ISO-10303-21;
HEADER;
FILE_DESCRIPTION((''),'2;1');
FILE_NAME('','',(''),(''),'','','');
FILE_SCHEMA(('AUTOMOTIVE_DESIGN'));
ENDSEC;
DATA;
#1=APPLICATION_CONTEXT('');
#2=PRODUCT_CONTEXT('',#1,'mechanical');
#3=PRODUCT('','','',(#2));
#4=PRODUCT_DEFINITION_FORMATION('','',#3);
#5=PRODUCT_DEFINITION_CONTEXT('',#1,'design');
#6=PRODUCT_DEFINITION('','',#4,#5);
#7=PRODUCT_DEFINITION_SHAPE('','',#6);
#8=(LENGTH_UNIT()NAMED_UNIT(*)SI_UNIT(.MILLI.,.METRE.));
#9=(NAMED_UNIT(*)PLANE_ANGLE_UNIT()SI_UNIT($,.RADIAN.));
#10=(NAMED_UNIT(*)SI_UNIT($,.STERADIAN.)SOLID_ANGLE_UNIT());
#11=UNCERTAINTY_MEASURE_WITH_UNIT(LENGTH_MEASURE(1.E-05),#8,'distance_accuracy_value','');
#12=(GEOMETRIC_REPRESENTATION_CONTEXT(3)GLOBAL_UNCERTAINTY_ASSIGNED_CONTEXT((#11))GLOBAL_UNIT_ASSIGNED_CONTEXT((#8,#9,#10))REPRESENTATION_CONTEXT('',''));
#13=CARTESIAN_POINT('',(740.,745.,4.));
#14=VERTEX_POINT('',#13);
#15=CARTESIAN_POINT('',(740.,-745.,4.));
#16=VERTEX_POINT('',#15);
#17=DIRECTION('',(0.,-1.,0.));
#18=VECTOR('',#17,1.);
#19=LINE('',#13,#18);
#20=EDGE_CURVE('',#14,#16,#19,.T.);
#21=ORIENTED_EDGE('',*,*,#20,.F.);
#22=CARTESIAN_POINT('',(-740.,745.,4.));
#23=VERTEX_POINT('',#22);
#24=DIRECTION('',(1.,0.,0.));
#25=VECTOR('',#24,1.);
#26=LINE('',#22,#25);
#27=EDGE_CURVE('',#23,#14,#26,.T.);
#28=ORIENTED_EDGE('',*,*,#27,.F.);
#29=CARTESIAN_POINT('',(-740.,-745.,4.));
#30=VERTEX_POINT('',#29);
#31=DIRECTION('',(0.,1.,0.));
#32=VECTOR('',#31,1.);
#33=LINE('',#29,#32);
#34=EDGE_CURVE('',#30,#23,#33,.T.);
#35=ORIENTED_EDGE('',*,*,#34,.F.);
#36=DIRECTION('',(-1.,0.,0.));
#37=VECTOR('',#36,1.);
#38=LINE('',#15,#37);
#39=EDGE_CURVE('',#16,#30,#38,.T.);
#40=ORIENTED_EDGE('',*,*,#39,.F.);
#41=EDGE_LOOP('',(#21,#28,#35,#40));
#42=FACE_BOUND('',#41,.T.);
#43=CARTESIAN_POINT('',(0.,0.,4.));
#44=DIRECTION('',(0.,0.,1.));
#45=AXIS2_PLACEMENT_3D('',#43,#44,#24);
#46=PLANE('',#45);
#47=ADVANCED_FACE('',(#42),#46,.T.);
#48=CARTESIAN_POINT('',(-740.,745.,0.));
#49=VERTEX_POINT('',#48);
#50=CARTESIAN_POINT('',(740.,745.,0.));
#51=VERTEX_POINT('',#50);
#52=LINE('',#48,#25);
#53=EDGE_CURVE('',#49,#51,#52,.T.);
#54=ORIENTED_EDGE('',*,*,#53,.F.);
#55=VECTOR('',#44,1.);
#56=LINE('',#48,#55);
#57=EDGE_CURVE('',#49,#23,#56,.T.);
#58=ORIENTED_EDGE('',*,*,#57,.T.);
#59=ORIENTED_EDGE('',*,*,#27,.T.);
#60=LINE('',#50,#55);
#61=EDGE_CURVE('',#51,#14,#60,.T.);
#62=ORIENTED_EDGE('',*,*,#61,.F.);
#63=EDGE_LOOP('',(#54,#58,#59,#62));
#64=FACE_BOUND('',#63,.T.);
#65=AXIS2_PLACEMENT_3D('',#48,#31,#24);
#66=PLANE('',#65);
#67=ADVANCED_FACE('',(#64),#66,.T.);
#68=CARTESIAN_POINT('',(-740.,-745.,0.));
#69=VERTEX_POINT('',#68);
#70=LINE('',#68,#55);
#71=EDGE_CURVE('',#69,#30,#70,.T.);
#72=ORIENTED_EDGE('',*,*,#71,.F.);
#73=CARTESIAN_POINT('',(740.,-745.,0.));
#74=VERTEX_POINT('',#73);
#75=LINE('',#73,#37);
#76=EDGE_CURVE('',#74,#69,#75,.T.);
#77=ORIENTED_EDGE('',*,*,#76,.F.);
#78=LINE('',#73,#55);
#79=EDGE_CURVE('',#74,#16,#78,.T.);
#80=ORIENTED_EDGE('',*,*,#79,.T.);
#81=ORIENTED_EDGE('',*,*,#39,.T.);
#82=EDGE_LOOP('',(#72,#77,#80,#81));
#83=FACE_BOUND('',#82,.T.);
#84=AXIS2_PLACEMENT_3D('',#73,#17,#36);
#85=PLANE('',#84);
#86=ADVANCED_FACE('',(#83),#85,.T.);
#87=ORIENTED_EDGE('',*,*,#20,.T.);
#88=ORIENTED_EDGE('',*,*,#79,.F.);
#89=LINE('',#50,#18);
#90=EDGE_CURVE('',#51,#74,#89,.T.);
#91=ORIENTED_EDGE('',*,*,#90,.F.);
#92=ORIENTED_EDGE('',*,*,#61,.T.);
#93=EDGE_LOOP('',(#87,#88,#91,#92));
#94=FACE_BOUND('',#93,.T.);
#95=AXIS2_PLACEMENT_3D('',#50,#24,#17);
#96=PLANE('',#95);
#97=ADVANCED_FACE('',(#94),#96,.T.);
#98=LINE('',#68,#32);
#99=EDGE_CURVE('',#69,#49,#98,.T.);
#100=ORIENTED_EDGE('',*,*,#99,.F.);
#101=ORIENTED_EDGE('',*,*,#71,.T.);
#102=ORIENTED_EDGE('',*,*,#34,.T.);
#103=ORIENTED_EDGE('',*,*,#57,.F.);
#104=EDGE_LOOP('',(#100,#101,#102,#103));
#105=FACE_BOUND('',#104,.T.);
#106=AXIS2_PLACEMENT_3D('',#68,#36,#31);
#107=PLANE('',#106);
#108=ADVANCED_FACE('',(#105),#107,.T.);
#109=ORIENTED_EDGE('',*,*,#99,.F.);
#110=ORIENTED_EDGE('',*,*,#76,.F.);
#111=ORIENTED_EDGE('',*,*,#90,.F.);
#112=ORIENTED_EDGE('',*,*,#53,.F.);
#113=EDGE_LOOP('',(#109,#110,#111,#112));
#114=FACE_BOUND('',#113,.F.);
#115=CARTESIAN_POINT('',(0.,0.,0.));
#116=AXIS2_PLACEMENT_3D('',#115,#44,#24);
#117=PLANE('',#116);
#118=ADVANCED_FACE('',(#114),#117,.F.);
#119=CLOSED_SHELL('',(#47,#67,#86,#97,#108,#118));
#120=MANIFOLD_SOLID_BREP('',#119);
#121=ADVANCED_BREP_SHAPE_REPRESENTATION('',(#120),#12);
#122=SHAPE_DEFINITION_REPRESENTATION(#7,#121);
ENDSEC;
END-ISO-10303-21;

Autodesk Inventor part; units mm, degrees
ref_plane "YZ Plane" through (0, 0, 0) normal (1, 0, 0) x (0, 1, 0)
ref_plane "XZ Plane" through (0, 0, 0) normal (0, 1, 0) x (-1, 0, 0)
ref_plane "XY Plane" through (0, 0, 0) normal (0, 0, 1) x (1, 0, 0)
sketch "Sketch1" plane through (0, 0, 0) normal (0, 0, 1) x (1, 0, 0)
  line L0 (740, -745) -> (-740, -745)
  line L1 (-740, -745) -> (-740, 745)
  line L2 (-740, 745) -> (740, 745)
  line L3 (740, 745) -> (740, -745)
  line L4 (740, -745) -> (-740, 745) construction
  line L5 (-740, -745) -> (740, 745) construction
  point P0 (0, 0)
  dimension "d0" = 1480
  dimension "d1" = 1490
extrude "Plate1" add sketch "Sketch1" along normal blind 4
sketch "Sketch2" plane through (0, 0, 0) normal (0, 0, -1) x (-1, 0, 0)
  line L0 (525.2603, -544.1907) -> (525.2603, -1005.879) construction
  line L1 (525.2603, -1005.879) -> (495.2603, -1005.879) construction
  line L2 (495.2603, -1005.879) -> (495.2603, -544.1907) construction
  line L3 (495.2603, -544.1907) -> (525.2603, -544.1907) construction
  line L4 (210.5058, -493) -> (210.5058, -590) projected
  line L5 (210.5058, -590) -> (206.5068, -590) projected
  line L6 (-289.6228, -493) -> (-289.6228, -590) projected
  line L7 (-289.6228, -590) -> (-293.6218, -590) projected
  ellipse E0 centre (-289.6228, 745) end of major axis (-289.6228, 775) minor radius 0.6803 (-289.6228, 715) -> (-289.6228, 775) ccw projected
  line L8 (-289.6228, 715) -> (-293.6218, 715) projected
  ellipse E1 centre (210.5058, 745) end of major axis (210.5058, 775) minor radius 0.6803 (210.5058, 715) -> (210.5058, 775) ccw projected
  line L9 (210.5058, 715) -> (206.5068, 715) projected
  line L10 (-739.3197, -489.5) -> (-710, -489.5) projected
  line L11 (-710, -489.5) -> (-710, -485.5) projected
  line L12 (-739.3197, 7.1667) -> (-710, 7.1667) projected
  line L13 (-710, 7.1667) -> (-710, 11.1667) projected
  line L14 (-739.3197, 503.8333) -> (-710, 503.8333) projected
  line L15 (-710, 503.8333) -> (-710, 507.8333) projected
  line L16 (710, -489.5) -> (710, -485.5) construction
  line L17 (710, 7.1667) -> (710, 11.1667) projected
  line L18 (710, 503.8333) -> (710, 507.8333) projected
  line L19 (710, -489.5) -> (710, -485.5) projected
  line L20 (710, 503.8333) -> (680, 503.8333)
  line L21 (710, 7.1667) -> (680, 7.1667)
  line L22 (710, -489.5) -> (680, -489.5)
  point P0 (0, 0)
  dimension "d6" = 30
  dimension "d7" = 30
  dimension "d8" = 30
mark "Mark1"
equation "\"d0\" = Лист_ширина"
equation "\"d2\" = Thickness"
equation "\"BendRadius\" = Thickness"
equation "\"BendReliefWidth\" = Thickness"
equation "\"BendReliefDepth\" = 0.5 * Thickness"
equation "\"CornerReliefSize\" = 4 * Thickness"
equation "\"MinimumRemnant\" = 2 * Thickness"
equation "\"TransitionRadius\" = BendRadius"
equation "\"JacobiRadiusSize\" = BendRadius"
equation "\"GapSize\" = Thickness"
equation "\"Лист_ширина\" = 1480"
equation "\"Thickness\" = 4"
properties part number "GBK 1318 shield" material "Steel"
